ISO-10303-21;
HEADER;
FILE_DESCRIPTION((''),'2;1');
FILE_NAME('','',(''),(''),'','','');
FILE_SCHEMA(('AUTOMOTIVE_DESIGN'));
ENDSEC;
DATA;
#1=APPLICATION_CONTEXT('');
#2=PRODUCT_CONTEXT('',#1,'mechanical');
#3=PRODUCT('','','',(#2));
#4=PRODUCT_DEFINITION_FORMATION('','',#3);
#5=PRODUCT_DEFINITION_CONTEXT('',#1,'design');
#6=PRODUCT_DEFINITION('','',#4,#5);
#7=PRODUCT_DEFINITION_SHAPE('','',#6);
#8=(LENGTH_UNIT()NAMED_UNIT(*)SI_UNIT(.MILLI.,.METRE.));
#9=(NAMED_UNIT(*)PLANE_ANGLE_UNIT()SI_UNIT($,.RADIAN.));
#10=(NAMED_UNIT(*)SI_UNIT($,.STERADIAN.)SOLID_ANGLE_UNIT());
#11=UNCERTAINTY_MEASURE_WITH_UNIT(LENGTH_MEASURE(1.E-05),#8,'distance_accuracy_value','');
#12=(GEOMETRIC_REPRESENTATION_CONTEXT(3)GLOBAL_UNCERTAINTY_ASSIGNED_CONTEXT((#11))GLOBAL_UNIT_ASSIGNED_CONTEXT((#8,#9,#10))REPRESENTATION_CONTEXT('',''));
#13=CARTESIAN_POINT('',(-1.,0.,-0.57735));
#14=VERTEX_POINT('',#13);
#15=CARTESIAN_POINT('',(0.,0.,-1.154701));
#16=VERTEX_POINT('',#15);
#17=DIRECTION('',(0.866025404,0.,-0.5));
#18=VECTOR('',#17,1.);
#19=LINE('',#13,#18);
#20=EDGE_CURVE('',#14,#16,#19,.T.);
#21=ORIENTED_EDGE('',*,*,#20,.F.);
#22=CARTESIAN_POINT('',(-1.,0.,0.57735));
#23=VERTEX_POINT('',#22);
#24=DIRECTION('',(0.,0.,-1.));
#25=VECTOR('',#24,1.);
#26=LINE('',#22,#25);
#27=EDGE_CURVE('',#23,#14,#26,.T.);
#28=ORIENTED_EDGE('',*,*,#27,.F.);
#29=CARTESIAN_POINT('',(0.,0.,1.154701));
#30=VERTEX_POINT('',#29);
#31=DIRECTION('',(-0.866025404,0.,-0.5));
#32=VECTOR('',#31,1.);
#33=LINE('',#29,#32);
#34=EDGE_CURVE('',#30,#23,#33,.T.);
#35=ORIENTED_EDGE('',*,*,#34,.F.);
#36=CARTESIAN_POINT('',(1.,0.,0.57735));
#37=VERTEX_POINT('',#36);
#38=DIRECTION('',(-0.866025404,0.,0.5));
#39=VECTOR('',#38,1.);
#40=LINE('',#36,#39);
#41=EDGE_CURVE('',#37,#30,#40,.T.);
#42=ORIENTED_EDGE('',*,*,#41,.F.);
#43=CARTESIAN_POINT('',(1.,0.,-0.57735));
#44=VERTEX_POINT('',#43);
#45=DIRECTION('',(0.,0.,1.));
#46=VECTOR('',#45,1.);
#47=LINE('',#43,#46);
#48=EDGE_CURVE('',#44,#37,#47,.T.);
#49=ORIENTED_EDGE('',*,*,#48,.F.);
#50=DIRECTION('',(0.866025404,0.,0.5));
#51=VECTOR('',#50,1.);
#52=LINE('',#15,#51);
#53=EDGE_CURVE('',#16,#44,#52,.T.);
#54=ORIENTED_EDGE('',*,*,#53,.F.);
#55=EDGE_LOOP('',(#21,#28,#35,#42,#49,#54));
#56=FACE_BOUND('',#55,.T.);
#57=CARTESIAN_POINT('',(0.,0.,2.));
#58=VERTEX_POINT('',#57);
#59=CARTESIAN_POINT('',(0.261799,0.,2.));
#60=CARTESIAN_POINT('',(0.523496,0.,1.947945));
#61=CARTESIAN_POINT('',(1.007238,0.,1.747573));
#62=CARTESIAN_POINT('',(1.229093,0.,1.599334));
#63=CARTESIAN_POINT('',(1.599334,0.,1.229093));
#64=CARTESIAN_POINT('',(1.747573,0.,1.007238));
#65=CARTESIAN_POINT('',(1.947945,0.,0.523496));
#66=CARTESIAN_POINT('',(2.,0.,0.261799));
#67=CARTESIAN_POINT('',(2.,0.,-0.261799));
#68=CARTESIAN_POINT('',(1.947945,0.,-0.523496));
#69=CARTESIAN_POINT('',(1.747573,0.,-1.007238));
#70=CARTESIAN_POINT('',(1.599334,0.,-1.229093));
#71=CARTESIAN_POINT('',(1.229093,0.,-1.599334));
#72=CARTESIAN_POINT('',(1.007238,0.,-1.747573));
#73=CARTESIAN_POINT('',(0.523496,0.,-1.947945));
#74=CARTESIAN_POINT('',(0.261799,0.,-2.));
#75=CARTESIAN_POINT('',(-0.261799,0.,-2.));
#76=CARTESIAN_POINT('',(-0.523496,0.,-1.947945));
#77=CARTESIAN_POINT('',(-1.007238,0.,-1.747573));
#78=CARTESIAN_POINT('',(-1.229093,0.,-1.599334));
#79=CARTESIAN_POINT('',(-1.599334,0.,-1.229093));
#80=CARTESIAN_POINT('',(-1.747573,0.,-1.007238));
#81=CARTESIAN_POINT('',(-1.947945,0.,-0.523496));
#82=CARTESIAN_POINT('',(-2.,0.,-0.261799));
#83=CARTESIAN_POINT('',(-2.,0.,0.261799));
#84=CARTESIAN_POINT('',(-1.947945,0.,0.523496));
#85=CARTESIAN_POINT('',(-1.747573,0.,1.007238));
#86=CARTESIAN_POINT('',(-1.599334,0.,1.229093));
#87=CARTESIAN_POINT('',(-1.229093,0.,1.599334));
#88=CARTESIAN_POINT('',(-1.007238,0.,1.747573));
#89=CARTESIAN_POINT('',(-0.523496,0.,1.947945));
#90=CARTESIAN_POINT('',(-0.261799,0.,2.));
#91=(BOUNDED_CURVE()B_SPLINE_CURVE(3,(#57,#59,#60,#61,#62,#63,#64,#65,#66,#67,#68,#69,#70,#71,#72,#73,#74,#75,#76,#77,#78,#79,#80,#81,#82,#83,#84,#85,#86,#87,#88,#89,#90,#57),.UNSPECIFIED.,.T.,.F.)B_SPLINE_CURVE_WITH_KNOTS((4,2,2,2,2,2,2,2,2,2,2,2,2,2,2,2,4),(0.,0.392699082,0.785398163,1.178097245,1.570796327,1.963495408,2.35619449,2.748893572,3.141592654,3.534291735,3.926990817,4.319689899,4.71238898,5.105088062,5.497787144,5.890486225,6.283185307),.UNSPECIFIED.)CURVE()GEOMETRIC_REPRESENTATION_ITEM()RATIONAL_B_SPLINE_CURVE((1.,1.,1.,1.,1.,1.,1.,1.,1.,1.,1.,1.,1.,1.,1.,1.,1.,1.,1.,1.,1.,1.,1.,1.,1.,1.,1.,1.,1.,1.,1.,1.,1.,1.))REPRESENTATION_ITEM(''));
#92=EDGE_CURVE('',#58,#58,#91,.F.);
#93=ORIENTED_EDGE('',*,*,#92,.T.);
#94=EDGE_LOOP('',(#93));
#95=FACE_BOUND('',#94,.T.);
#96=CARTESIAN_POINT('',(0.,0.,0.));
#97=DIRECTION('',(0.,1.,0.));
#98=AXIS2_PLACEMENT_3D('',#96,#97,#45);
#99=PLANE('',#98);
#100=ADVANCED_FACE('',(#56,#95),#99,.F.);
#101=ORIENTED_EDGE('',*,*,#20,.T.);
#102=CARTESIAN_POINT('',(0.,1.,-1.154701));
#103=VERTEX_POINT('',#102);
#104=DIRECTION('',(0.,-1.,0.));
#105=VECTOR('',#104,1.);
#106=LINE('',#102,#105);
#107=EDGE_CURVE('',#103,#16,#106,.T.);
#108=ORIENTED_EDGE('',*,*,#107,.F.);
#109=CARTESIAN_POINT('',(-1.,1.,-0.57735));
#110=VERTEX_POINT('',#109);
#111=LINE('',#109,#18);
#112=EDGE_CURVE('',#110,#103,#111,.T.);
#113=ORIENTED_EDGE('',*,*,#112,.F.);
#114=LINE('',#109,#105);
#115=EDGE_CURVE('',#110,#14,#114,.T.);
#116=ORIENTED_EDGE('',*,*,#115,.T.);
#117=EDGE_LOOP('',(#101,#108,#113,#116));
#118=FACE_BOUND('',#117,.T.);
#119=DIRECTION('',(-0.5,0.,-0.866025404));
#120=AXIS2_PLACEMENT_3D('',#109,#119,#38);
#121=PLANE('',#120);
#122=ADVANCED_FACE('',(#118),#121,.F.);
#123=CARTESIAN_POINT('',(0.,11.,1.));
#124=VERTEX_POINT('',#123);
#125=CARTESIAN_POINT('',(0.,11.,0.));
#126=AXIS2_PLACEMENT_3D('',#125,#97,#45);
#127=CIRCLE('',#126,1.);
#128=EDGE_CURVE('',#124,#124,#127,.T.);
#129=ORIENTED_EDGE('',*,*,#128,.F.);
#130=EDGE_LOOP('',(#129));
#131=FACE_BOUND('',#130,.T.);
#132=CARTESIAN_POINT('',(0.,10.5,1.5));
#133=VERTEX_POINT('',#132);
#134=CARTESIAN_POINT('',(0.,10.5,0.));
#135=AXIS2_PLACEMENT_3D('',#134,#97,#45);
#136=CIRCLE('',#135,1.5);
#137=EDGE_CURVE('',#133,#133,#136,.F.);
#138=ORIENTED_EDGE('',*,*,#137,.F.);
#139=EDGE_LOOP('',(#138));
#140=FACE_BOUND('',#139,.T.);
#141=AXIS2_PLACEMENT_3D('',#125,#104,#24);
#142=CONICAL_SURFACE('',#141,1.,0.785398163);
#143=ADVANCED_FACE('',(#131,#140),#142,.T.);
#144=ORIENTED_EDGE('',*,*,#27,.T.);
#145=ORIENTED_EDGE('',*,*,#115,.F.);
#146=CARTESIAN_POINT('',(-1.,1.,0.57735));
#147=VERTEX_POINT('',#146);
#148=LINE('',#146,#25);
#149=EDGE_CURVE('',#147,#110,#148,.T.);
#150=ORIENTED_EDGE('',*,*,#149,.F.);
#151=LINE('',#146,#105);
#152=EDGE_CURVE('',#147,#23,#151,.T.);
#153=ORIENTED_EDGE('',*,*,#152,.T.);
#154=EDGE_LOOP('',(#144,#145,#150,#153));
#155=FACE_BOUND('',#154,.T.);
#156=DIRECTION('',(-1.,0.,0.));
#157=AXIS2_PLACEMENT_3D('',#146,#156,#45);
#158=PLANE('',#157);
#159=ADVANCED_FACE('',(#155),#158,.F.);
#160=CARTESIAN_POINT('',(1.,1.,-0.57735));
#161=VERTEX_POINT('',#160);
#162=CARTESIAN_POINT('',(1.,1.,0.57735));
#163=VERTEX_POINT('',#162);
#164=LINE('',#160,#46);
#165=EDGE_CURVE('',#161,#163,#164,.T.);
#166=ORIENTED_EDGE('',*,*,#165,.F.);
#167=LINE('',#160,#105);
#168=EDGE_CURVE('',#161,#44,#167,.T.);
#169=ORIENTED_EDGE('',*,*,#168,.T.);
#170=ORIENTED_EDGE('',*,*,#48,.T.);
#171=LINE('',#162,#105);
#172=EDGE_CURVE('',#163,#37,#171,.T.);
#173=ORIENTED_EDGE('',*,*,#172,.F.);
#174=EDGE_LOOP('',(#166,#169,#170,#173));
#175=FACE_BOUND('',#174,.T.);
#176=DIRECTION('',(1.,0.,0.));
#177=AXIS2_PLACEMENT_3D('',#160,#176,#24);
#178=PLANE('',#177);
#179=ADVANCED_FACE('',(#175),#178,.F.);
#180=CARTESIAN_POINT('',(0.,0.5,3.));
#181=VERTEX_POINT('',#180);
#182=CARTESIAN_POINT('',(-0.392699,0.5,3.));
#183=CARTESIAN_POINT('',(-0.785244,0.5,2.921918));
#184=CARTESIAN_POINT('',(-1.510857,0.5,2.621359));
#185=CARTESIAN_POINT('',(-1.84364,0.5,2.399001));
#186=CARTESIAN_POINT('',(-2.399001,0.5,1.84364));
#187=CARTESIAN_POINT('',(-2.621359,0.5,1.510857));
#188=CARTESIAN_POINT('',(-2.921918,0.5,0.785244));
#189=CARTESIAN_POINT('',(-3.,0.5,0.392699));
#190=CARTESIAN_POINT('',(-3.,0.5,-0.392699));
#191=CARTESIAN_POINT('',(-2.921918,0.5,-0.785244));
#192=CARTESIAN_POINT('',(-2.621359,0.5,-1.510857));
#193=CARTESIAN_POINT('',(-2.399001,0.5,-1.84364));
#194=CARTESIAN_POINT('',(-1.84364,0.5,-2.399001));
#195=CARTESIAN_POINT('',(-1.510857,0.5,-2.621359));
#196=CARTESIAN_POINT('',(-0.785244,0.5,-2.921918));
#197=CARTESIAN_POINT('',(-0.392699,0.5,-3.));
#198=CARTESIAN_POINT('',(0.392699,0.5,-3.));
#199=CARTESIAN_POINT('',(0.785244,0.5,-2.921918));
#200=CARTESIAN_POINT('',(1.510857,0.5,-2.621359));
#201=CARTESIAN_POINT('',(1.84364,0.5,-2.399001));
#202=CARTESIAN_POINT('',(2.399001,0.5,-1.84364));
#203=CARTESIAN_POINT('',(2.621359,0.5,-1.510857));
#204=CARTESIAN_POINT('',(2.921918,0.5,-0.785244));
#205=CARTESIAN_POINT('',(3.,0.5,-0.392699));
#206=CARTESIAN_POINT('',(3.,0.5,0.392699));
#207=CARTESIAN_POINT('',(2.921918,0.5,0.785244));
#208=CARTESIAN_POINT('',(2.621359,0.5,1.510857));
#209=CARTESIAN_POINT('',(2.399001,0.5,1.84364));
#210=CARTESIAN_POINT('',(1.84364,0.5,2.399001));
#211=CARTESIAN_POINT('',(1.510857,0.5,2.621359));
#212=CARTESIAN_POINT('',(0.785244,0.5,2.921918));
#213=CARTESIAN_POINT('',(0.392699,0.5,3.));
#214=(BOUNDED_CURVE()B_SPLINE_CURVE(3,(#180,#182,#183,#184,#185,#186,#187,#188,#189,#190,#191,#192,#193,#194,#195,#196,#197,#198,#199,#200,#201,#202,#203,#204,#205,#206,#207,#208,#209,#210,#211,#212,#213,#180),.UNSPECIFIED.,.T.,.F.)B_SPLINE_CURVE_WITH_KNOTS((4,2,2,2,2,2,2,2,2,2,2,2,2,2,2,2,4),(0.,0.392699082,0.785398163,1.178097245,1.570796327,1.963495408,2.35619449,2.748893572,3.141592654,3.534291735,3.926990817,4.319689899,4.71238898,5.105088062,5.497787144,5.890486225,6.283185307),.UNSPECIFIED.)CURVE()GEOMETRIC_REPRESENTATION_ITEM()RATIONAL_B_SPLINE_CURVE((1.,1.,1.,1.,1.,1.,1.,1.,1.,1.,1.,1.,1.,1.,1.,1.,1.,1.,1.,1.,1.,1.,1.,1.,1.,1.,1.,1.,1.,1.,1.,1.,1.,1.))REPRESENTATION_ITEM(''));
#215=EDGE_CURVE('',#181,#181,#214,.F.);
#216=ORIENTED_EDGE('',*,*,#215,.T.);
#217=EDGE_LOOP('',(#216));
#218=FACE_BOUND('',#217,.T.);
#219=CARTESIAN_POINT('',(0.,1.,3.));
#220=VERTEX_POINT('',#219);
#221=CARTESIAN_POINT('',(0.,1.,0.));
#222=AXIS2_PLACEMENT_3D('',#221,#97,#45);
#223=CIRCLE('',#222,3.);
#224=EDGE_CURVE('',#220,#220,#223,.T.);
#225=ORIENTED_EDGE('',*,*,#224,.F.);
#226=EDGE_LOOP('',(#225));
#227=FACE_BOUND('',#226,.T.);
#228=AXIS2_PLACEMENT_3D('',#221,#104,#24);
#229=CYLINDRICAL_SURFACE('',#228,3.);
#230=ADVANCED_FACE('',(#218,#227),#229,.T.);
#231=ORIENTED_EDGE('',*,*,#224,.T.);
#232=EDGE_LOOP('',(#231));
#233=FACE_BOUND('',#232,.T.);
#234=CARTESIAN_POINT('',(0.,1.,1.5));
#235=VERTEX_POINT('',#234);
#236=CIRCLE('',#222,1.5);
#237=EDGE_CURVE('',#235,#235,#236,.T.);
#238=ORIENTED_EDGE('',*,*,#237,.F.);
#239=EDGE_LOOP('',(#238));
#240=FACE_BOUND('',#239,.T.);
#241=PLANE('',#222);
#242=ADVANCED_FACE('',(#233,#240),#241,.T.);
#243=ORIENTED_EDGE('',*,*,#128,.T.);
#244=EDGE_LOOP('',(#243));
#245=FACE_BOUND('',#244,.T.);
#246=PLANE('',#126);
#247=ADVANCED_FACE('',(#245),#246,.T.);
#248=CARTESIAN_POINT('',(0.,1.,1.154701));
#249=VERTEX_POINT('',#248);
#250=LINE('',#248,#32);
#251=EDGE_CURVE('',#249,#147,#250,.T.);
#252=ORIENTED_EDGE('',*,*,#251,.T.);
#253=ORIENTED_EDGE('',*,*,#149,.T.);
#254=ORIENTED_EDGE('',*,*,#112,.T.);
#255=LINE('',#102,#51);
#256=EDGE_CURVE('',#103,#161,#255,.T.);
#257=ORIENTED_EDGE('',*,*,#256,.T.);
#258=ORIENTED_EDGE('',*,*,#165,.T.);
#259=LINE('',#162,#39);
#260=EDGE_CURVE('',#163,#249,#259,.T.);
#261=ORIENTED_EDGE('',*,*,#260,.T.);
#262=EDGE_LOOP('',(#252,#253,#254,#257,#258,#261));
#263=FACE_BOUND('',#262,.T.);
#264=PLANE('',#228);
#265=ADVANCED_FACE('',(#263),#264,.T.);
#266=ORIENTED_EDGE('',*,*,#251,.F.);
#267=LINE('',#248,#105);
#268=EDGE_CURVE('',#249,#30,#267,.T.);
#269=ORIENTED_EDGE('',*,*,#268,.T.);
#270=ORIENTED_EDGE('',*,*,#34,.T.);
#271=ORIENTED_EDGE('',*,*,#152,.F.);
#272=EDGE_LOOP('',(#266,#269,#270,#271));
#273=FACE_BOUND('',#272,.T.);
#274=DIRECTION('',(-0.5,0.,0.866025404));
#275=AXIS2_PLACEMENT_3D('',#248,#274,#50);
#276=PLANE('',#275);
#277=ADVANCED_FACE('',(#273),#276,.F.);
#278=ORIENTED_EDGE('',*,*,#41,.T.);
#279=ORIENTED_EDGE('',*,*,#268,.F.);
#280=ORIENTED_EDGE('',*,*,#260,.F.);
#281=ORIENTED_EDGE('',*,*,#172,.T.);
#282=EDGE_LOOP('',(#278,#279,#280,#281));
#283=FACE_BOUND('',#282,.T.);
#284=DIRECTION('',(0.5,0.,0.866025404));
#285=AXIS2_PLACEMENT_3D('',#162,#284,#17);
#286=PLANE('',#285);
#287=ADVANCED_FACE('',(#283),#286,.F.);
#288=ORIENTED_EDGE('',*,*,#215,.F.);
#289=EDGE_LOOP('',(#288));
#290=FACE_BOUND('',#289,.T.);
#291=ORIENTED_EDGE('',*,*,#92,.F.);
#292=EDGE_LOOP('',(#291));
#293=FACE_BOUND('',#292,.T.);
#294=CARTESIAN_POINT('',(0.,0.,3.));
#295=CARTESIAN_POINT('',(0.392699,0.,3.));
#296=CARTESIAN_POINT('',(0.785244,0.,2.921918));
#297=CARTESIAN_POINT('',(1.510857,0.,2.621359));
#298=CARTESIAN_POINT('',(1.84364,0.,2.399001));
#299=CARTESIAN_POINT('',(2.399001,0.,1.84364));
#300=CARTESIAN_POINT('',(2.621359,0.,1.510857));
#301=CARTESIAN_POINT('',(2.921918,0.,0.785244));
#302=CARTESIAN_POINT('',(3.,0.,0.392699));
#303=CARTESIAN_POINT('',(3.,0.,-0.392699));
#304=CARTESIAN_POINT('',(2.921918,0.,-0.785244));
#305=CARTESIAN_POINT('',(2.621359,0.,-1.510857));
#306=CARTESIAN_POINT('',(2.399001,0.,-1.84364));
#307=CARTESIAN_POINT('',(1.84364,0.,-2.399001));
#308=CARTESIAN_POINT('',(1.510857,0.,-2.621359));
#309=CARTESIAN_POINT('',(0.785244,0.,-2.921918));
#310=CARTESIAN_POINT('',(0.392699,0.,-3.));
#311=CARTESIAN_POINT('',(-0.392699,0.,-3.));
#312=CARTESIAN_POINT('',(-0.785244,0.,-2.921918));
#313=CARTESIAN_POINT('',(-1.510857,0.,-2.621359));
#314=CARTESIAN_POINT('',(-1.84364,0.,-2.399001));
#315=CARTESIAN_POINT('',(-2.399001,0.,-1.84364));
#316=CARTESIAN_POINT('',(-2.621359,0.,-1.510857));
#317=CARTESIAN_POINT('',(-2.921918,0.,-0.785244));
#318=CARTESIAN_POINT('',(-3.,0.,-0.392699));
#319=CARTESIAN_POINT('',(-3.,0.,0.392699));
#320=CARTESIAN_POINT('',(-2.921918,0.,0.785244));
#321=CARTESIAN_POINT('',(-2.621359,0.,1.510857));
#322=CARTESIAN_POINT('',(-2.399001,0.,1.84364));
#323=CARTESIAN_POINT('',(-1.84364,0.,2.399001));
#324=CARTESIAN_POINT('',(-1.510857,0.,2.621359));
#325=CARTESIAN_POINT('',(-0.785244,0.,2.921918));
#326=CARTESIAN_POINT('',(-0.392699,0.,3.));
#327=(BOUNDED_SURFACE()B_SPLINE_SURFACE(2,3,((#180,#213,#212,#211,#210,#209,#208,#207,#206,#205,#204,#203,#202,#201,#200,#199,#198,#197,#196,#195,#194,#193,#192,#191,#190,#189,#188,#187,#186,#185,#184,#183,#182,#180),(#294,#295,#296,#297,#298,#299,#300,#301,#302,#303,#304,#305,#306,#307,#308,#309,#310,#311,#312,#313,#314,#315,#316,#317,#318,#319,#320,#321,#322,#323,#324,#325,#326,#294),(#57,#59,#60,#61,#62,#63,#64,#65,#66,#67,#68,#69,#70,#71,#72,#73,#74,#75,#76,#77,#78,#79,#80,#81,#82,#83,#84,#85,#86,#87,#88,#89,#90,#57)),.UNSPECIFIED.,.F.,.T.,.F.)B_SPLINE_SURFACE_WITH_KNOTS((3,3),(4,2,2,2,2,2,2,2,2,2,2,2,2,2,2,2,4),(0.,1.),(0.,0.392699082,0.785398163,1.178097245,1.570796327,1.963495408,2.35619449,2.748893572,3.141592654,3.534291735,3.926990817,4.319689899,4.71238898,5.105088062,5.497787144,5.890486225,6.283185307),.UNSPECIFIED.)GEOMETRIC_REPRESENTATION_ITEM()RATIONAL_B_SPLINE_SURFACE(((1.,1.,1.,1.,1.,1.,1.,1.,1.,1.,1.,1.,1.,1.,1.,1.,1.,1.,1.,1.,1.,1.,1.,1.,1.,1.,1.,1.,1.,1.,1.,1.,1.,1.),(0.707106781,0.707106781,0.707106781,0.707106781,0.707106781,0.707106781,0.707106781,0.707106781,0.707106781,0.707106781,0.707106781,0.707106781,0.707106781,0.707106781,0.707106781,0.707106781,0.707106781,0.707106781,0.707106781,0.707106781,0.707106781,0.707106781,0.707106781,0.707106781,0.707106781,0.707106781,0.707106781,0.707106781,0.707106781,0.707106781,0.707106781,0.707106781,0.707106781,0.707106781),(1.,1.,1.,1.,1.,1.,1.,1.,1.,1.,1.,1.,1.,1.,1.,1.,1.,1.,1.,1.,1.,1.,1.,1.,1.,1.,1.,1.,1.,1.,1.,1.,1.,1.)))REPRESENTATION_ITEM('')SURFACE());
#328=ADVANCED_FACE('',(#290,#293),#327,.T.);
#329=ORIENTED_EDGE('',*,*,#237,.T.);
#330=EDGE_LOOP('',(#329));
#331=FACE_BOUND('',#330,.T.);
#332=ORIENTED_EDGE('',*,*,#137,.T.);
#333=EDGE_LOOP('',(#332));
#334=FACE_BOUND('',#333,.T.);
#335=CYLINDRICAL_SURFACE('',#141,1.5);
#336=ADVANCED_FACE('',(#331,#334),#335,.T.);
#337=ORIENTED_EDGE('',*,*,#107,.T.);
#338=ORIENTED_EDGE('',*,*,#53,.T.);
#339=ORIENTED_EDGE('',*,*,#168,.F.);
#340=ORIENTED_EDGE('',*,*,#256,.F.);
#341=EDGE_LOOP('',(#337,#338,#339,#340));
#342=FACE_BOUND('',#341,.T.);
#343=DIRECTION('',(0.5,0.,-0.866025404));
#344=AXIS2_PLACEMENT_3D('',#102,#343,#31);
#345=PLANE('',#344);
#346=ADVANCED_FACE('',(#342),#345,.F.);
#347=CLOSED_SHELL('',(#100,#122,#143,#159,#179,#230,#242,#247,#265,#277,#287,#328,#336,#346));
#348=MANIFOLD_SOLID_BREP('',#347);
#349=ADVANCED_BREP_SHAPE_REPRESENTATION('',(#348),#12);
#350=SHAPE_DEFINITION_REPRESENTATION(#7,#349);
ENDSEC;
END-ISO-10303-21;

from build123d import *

# Parameters (mm, degrees)
SKETCH_1_R          = 3
EXTRUDE_1_DEPTH     = 1
SKETCH_2_R          = 1.5
EXTRUDE_2_DEPTH     = 10
CUT_EXTRUDE_1_DEPTH = 1
FILLET_1_SIZE       = 0.5
FILLET_1_SIZE_2     = 1
CHAMFER_1_SIZE      = 0.5


with BuildPart() as part:
    # 草图1 → 凸台-拉伸1 (new body)
    with BuildSketch(Plane(origin=(0, 0, 0), x_dir=(1, 0, 0), z_dir=(0, 1, 0))):
        with Locations(Location((0, 0, 0), (0, 0, 270))):
            Circle(SKETCH_1_R)
    extrude(amount=EXTRUDE_1_DEPTH)

    # 草图2 → 凸台-拉伸2 (add)
    with BuildSketch(Plane(origin=(0, 1, 0), x_dir=(1, 0, 0), z_dir=(0, 1, 0))):
        with Locations(Location((0, 0, 0), (0, 0, 270))):
            Circle(SKETCH_2_R)
    extrude(amount=EXTRUDE_2_DEPTH)

    # 草图3 → 切除-拉伸1 (cut)
    with BuildSketch(Plane.XZ):
        Polygon((0, 1.154700538), (-1, 0.577350269), (-1, -0.577350269), (0, -1.154700538), (1, -0.577350269), (1, 0.577350269), align=None)
    extrude(amount=-CUT_EXTRUDE_1_DEPTH, mode=Mode.SUBTRACT)

    # 圆角1
    # an asymmetric fillet: 1, 0.5 mm, written as the material it takes off along each edge
    with BuildSketch(Plane(origin=(0, 0, 0), x_dir=(0, 0, 1), z_dir=(-1, 0, 0))) as fillet_1_piece_1:
        with BuildLine():
            Bezier((3, FILLET_1_SIZE), (3, 0), (3 - FILLET_1_SIZE_2, 0), weights=[1, 0.707106781, 1])
            Line((3 - FILLET_1_SIZE_2, 0), (3, 0))
            Line((3, 0), (3, FILLET_1_SIZE))
        make_face()
    revolve(axis=Axis((0, 0, 0), (0, 1, 0)), mode=Mode.SUBTRACT)

    # 倒角1
    chamfer_1_edges = [part.edges().sort_by_distance(p)[0] for p in [
        (0, 11, -1.5),
    ]]
    chamfer(chamfer_1_edges, length=CHAMFER_1_SIZE)


solid = part.part
